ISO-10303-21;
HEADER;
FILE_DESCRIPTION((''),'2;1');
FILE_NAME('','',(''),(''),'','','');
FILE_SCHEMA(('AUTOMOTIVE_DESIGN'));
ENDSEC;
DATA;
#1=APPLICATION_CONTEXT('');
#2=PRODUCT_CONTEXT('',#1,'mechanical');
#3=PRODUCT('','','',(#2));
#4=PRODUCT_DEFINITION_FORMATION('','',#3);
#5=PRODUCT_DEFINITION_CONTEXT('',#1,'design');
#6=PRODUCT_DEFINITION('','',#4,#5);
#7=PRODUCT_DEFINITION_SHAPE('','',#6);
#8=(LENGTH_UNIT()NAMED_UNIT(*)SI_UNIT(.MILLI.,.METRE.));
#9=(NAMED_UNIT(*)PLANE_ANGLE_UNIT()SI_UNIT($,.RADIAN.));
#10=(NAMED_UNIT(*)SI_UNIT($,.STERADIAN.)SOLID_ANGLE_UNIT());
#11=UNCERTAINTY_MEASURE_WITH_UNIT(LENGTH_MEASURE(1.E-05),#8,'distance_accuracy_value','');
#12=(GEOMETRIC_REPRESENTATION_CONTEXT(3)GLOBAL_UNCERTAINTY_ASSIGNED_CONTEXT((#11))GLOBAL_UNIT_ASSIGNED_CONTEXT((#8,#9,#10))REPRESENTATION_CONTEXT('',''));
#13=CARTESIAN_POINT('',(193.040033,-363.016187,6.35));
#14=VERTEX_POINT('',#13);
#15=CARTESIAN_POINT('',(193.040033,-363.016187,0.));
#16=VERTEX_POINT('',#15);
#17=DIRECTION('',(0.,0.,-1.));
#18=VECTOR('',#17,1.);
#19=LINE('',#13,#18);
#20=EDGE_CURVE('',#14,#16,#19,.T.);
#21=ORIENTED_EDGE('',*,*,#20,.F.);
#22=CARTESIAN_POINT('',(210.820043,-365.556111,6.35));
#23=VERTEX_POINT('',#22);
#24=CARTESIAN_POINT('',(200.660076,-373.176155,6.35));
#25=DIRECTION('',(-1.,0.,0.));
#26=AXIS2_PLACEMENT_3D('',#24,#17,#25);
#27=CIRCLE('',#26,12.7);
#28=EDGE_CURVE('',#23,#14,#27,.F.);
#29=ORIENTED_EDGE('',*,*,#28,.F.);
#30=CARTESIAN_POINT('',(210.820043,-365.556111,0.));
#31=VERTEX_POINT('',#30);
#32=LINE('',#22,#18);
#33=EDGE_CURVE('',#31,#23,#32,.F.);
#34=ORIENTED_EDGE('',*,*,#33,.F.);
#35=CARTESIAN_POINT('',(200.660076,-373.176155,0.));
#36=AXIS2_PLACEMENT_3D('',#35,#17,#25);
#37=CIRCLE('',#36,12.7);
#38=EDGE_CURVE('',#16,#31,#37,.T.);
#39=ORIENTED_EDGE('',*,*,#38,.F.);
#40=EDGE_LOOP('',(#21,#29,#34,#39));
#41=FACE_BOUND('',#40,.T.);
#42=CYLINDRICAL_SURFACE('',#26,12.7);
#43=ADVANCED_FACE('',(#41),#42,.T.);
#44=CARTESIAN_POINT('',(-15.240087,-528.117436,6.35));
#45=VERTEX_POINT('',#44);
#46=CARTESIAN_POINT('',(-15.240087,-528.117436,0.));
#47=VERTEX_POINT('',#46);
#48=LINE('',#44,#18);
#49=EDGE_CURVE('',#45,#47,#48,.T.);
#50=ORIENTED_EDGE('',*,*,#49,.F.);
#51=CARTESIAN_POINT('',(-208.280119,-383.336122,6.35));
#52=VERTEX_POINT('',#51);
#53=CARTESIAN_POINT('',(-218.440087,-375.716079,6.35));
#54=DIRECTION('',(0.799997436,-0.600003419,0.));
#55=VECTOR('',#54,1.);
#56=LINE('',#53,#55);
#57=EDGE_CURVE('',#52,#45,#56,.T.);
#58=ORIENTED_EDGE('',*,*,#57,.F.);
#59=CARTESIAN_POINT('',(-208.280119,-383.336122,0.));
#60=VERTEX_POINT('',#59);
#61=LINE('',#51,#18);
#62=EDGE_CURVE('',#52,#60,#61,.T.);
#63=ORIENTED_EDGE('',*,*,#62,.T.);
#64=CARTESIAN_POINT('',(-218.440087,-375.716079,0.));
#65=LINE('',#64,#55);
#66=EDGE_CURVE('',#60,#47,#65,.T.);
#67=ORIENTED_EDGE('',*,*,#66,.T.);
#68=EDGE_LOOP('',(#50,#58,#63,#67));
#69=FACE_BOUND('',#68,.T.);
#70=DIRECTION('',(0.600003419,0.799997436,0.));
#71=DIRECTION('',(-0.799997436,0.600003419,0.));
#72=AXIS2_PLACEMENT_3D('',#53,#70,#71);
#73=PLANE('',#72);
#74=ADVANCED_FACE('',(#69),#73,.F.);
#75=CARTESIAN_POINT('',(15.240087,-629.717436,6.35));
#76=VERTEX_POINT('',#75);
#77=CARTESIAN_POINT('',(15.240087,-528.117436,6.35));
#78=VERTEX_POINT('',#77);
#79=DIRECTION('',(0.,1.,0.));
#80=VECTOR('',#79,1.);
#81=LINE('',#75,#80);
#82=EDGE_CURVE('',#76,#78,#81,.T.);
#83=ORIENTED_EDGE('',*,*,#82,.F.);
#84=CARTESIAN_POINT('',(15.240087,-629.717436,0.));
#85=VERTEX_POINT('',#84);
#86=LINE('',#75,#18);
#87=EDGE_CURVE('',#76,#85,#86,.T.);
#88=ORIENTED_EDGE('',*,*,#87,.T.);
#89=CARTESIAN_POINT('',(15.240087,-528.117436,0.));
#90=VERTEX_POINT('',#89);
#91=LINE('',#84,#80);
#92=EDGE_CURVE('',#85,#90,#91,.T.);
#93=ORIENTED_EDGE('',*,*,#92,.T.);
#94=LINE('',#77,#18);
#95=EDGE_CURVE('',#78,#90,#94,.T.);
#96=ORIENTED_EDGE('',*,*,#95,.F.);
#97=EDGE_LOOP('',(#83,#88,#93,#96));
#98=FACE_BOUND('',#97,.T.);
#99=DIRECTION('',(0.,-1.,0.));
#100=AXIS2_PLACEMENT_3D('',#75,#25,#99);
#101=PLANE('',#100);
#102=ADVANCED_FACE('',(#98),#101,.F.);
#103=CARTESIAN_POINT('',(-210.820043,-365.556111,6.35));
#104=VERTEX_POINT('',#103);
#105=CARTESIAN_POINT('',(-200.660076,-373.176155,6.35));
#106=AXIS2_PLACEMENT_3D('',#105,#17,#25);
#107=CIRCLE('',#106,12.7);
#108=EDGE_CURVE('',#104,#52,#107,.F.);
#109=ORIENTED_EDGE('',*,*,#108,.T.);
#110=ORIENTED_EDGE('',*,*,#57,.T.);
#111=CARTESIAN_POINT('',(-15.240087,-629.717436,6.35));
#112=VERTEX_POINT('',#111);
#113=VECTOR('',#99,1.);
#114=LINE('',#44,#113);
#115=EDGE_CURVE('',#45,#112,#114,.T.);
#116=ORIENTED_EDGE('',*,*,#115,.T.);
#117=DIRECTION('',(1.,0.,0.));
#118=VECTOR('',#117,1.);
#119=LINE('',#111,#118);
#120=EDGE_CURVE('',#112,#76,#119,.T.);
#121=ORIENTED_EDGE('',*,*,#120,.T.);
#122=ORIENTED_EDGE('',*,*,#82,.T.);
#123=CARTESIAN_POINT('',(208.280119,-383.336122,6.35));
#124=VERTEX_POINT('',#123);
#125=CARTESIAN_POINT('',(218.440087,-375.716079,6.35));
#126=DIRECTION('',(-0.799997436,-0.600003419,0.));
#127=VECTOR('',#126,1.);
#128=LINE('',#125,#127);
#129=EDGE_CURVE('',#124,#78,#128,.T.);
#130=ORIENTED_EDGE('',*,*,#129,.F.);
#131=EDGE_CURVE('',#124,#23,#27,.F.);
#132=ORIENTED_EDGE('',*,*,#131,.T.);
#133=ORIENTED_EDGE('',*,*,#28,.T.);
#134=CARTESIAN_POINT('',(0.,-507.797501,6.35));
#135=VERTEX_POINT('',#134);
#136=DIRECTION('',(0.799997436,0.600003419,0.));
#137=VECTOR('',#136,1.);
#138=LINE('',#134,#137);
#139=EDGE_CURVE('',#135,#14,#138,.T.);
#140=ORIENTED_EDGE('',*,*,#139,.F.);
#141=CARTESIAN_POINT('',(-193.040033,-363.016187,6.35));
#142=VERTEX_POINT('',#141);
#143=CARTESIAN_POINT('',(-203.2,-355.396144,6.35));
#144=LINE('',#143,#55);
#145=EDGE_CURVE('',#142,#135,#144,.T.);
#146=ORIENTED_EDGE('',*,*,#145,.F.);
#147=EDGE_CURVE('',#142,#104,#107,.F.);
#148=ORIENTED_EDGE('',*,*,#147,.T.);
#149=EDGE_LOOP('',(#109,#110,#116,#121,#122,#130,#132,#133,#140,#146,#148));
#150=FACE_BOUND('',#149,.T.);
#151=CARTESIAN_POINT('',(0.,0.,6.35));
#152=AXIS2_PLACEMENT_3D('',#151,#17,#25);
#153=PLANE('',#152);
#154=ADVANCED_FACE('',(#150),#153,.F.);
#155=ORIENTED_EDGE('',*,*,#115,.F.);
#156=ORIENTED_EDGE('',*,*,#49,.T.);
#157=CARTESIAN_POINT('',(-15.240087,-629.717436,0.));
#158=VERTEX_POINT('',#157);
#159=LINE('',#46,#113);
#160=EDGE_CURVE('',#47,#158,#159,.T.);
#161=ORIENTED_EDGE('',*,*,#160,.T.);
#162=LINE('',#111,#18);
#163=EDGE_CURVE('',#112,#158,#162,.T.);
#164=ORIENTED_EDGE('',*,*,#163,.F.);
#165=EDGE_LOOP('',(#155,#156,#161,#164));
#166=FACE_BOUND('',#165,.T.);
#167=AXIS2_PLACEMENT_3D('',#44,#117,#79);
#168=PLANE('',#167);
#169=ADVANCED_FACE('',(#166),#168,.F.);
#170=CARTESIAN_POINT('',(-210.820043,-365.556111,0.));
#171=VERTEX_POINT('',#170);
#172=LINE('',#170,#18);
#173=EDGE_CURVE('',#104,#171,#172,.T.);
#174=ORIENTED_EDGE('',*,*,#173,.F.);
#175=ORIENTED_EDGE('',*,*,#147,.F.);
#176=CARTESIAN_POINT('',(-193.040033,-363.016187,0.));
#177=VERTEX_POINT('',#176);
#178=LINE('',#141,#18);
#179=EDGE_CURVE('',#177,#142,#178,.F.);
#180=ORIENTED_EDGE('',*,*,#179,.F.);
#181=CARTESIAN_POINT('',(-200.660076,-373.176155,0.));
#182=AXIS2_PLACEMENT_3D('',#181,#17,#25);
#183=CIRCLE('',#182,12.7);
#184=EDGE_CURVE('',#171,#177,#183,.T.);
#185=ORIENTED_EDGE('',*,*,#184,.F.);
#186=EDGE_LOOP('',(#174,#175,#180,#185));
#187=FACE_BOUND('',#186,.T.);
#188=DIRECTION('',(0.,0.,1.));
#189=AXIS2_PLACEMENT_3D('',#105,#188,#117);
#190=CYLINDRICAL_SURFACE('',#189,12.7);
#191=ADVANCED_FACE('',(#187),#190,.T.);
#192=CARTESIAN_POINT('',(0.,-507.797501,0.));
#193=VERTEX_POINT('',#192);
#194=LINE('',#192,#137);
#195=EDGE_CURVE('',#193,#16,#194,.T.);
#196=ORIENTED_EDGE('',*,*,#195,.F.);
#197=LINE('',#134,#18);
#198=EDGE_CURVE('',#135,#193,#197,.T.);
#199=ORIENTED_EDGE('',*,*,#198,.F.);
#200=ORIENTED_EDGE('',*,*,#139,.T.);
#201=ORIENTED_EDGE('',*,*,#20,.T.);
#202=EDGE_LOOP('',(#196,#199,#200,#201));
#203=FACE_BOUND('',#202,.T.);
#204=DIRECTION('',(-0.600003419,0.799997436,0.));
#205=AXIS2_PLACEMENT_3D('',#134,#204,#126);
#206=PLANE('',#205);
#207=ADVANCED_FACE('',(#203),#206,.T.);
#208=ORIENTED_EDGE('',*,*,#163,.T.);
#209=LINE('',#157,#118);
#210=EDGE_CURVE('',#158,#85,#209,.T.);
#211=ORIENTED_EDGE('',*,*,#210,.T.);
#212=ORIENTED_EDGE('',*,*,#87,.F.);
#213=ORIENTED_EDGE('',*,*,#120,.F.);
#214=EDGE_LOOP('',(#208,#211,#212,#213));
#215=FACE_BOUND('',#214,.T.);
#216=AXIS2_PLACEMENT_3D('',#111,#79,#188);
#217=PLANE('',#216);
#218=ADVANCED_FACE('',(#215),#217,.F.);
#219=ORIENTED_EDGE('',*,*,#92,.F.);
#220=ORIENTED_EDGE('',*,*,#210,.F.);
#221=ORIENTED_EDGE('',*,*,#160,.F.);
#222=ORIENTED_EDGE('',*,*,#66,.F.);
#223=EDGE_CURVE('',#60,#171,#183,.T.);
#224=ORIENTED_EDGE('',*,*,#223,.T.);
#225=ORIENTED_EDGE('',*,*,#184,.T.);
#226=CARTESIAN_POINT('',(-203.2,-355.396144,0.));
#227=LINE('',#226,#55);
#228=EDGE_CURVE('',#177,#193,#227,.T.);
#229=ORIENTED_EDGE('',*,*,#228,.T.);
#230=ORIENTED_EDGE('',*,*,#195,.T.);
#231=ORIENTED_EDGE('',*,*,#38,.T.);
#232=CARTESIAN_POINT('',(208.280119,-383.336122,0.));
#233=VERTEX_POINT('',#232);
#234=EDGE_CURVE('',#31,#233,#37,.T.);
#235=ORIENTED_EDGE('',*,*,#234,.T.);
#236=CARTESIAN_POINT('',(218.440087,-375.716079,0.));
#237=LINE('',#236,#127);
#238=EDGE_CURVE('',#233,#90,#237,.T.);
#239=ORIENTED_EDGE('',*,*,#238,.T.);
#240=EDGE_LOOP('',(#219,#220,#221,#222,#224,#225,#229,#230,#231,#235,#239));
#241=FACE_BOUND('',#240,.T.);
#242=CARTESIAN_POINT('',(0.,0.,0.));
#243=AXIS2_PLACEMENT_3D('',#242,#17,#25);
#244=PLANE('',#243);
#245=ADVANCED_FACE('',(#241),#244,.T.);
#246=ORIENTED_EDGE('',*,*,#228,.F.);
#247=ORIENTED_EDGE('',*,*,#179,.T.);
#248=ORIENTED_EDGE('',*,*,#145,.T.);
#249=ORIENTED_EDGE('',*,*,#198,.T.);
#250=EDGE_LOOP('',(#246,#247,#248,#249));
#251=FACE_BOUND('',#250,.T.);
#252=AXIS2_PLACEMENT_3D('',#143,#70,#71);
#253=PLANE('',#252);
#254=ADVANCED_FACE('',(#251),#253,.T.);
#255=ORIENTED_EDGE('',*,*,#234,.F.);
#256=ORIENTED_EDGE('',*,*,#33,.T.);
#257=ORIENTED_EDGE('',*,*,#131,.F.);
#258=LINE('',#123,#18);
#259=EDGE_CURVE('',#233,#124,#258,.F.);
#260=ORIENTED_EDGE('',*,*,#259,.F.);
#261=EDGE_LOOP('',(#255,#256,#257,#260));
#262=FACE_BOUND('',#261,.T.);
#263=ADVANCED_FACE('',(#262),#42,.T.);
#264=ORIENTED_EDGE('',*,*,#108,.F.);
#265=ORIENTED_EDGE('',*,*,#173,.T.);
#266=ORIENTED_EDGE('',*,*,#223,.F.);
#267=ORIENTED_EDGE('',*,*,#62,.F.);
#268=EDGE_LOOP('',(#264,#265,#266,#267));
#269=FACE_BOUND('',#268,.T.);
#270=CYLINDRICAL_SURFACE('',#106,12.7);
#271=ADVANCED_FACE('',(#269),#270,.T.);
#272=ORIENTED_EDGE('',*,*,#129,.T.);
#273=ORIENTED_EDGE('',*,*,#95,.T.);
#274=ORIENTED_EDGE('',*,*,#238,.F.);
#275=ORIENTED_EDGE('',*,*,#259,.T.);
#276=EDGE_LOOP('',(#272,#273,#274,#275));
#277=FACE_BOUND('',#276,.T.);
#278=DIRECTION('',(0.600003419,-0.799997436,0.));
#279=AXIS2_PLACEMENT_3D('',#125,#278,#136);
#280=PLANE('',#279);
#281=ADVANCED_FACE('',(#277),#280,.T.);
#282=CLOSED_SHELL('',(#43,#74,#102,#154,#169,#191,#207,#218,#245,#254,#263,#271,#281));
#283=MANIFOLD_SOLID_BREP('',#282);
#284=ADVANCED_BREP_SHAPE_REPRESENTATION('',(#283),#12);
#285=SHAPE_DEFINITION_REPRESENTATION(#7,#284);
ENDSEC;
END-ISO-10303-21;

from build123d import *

# Parameters (mm, degrees)
BOSS_EXTRUDE2_DEPTH = 6.35
FILLET1_R           = 12.7
FILLET2_R           = 12.7
FILLET3_R           = 12.7
FILLET4_R           = 12.7


with BuildPart() as part:
    # Sketch6 → Boss-Extrude2 (new body)
    with BuildSketch(Plane.XY):
        Polygon((-203.2, -355.396143874), (0, -507.797500764), (203.2, -355.396143874), (218.440086841, -375.716078743), (15.240086841, -528.117435634), (15.240086841, -629.717435634), (-15.240086841, -629.717435634), (-15.240086841, -528.117435634), (-218.440086841, -375.716078743), align=None)
    extrude(amount=BOSS_EXTRUDE2_DEPTH)

    # Fillet1
    fillet1_edges = [part.edges().sort_by_distance(p)[0] for p in [
        (203.2, -355.396143874, 3.175),
    ]]
    fillet(fillet1_edges, radius=FILLET1_R)

    # Fillet2
    fillet2_edges = [part.edges().sort_by_distance(p)[0] for p in [
        (218.440086841, -375.716078743, 3.175),
    ]]
    fillet(fillet2_edges, radius=FILLET2_R - 0.0001)  # a hair under: the kernel refuses the full size

    # Fillet3
    fillet3_edges = [part.edges().sort_by_distance(p)[0] for p in [
        (-203.2, -355.396143874, 3.175),
    ]]
    fillet(fillet3_edges, radius=FILLET3_R)

    # Fillet4
    fillet4_edges = [part.edges().sort_by_distance(p)[0] for p in [
        (-218.440086841, -375.716078743, 3.175),
    ]]
    fillet(fillet4_edges, radius=FILLET4_R - 0.0001)  # a hair under: the kernel refuses the full size


solid = part.part
